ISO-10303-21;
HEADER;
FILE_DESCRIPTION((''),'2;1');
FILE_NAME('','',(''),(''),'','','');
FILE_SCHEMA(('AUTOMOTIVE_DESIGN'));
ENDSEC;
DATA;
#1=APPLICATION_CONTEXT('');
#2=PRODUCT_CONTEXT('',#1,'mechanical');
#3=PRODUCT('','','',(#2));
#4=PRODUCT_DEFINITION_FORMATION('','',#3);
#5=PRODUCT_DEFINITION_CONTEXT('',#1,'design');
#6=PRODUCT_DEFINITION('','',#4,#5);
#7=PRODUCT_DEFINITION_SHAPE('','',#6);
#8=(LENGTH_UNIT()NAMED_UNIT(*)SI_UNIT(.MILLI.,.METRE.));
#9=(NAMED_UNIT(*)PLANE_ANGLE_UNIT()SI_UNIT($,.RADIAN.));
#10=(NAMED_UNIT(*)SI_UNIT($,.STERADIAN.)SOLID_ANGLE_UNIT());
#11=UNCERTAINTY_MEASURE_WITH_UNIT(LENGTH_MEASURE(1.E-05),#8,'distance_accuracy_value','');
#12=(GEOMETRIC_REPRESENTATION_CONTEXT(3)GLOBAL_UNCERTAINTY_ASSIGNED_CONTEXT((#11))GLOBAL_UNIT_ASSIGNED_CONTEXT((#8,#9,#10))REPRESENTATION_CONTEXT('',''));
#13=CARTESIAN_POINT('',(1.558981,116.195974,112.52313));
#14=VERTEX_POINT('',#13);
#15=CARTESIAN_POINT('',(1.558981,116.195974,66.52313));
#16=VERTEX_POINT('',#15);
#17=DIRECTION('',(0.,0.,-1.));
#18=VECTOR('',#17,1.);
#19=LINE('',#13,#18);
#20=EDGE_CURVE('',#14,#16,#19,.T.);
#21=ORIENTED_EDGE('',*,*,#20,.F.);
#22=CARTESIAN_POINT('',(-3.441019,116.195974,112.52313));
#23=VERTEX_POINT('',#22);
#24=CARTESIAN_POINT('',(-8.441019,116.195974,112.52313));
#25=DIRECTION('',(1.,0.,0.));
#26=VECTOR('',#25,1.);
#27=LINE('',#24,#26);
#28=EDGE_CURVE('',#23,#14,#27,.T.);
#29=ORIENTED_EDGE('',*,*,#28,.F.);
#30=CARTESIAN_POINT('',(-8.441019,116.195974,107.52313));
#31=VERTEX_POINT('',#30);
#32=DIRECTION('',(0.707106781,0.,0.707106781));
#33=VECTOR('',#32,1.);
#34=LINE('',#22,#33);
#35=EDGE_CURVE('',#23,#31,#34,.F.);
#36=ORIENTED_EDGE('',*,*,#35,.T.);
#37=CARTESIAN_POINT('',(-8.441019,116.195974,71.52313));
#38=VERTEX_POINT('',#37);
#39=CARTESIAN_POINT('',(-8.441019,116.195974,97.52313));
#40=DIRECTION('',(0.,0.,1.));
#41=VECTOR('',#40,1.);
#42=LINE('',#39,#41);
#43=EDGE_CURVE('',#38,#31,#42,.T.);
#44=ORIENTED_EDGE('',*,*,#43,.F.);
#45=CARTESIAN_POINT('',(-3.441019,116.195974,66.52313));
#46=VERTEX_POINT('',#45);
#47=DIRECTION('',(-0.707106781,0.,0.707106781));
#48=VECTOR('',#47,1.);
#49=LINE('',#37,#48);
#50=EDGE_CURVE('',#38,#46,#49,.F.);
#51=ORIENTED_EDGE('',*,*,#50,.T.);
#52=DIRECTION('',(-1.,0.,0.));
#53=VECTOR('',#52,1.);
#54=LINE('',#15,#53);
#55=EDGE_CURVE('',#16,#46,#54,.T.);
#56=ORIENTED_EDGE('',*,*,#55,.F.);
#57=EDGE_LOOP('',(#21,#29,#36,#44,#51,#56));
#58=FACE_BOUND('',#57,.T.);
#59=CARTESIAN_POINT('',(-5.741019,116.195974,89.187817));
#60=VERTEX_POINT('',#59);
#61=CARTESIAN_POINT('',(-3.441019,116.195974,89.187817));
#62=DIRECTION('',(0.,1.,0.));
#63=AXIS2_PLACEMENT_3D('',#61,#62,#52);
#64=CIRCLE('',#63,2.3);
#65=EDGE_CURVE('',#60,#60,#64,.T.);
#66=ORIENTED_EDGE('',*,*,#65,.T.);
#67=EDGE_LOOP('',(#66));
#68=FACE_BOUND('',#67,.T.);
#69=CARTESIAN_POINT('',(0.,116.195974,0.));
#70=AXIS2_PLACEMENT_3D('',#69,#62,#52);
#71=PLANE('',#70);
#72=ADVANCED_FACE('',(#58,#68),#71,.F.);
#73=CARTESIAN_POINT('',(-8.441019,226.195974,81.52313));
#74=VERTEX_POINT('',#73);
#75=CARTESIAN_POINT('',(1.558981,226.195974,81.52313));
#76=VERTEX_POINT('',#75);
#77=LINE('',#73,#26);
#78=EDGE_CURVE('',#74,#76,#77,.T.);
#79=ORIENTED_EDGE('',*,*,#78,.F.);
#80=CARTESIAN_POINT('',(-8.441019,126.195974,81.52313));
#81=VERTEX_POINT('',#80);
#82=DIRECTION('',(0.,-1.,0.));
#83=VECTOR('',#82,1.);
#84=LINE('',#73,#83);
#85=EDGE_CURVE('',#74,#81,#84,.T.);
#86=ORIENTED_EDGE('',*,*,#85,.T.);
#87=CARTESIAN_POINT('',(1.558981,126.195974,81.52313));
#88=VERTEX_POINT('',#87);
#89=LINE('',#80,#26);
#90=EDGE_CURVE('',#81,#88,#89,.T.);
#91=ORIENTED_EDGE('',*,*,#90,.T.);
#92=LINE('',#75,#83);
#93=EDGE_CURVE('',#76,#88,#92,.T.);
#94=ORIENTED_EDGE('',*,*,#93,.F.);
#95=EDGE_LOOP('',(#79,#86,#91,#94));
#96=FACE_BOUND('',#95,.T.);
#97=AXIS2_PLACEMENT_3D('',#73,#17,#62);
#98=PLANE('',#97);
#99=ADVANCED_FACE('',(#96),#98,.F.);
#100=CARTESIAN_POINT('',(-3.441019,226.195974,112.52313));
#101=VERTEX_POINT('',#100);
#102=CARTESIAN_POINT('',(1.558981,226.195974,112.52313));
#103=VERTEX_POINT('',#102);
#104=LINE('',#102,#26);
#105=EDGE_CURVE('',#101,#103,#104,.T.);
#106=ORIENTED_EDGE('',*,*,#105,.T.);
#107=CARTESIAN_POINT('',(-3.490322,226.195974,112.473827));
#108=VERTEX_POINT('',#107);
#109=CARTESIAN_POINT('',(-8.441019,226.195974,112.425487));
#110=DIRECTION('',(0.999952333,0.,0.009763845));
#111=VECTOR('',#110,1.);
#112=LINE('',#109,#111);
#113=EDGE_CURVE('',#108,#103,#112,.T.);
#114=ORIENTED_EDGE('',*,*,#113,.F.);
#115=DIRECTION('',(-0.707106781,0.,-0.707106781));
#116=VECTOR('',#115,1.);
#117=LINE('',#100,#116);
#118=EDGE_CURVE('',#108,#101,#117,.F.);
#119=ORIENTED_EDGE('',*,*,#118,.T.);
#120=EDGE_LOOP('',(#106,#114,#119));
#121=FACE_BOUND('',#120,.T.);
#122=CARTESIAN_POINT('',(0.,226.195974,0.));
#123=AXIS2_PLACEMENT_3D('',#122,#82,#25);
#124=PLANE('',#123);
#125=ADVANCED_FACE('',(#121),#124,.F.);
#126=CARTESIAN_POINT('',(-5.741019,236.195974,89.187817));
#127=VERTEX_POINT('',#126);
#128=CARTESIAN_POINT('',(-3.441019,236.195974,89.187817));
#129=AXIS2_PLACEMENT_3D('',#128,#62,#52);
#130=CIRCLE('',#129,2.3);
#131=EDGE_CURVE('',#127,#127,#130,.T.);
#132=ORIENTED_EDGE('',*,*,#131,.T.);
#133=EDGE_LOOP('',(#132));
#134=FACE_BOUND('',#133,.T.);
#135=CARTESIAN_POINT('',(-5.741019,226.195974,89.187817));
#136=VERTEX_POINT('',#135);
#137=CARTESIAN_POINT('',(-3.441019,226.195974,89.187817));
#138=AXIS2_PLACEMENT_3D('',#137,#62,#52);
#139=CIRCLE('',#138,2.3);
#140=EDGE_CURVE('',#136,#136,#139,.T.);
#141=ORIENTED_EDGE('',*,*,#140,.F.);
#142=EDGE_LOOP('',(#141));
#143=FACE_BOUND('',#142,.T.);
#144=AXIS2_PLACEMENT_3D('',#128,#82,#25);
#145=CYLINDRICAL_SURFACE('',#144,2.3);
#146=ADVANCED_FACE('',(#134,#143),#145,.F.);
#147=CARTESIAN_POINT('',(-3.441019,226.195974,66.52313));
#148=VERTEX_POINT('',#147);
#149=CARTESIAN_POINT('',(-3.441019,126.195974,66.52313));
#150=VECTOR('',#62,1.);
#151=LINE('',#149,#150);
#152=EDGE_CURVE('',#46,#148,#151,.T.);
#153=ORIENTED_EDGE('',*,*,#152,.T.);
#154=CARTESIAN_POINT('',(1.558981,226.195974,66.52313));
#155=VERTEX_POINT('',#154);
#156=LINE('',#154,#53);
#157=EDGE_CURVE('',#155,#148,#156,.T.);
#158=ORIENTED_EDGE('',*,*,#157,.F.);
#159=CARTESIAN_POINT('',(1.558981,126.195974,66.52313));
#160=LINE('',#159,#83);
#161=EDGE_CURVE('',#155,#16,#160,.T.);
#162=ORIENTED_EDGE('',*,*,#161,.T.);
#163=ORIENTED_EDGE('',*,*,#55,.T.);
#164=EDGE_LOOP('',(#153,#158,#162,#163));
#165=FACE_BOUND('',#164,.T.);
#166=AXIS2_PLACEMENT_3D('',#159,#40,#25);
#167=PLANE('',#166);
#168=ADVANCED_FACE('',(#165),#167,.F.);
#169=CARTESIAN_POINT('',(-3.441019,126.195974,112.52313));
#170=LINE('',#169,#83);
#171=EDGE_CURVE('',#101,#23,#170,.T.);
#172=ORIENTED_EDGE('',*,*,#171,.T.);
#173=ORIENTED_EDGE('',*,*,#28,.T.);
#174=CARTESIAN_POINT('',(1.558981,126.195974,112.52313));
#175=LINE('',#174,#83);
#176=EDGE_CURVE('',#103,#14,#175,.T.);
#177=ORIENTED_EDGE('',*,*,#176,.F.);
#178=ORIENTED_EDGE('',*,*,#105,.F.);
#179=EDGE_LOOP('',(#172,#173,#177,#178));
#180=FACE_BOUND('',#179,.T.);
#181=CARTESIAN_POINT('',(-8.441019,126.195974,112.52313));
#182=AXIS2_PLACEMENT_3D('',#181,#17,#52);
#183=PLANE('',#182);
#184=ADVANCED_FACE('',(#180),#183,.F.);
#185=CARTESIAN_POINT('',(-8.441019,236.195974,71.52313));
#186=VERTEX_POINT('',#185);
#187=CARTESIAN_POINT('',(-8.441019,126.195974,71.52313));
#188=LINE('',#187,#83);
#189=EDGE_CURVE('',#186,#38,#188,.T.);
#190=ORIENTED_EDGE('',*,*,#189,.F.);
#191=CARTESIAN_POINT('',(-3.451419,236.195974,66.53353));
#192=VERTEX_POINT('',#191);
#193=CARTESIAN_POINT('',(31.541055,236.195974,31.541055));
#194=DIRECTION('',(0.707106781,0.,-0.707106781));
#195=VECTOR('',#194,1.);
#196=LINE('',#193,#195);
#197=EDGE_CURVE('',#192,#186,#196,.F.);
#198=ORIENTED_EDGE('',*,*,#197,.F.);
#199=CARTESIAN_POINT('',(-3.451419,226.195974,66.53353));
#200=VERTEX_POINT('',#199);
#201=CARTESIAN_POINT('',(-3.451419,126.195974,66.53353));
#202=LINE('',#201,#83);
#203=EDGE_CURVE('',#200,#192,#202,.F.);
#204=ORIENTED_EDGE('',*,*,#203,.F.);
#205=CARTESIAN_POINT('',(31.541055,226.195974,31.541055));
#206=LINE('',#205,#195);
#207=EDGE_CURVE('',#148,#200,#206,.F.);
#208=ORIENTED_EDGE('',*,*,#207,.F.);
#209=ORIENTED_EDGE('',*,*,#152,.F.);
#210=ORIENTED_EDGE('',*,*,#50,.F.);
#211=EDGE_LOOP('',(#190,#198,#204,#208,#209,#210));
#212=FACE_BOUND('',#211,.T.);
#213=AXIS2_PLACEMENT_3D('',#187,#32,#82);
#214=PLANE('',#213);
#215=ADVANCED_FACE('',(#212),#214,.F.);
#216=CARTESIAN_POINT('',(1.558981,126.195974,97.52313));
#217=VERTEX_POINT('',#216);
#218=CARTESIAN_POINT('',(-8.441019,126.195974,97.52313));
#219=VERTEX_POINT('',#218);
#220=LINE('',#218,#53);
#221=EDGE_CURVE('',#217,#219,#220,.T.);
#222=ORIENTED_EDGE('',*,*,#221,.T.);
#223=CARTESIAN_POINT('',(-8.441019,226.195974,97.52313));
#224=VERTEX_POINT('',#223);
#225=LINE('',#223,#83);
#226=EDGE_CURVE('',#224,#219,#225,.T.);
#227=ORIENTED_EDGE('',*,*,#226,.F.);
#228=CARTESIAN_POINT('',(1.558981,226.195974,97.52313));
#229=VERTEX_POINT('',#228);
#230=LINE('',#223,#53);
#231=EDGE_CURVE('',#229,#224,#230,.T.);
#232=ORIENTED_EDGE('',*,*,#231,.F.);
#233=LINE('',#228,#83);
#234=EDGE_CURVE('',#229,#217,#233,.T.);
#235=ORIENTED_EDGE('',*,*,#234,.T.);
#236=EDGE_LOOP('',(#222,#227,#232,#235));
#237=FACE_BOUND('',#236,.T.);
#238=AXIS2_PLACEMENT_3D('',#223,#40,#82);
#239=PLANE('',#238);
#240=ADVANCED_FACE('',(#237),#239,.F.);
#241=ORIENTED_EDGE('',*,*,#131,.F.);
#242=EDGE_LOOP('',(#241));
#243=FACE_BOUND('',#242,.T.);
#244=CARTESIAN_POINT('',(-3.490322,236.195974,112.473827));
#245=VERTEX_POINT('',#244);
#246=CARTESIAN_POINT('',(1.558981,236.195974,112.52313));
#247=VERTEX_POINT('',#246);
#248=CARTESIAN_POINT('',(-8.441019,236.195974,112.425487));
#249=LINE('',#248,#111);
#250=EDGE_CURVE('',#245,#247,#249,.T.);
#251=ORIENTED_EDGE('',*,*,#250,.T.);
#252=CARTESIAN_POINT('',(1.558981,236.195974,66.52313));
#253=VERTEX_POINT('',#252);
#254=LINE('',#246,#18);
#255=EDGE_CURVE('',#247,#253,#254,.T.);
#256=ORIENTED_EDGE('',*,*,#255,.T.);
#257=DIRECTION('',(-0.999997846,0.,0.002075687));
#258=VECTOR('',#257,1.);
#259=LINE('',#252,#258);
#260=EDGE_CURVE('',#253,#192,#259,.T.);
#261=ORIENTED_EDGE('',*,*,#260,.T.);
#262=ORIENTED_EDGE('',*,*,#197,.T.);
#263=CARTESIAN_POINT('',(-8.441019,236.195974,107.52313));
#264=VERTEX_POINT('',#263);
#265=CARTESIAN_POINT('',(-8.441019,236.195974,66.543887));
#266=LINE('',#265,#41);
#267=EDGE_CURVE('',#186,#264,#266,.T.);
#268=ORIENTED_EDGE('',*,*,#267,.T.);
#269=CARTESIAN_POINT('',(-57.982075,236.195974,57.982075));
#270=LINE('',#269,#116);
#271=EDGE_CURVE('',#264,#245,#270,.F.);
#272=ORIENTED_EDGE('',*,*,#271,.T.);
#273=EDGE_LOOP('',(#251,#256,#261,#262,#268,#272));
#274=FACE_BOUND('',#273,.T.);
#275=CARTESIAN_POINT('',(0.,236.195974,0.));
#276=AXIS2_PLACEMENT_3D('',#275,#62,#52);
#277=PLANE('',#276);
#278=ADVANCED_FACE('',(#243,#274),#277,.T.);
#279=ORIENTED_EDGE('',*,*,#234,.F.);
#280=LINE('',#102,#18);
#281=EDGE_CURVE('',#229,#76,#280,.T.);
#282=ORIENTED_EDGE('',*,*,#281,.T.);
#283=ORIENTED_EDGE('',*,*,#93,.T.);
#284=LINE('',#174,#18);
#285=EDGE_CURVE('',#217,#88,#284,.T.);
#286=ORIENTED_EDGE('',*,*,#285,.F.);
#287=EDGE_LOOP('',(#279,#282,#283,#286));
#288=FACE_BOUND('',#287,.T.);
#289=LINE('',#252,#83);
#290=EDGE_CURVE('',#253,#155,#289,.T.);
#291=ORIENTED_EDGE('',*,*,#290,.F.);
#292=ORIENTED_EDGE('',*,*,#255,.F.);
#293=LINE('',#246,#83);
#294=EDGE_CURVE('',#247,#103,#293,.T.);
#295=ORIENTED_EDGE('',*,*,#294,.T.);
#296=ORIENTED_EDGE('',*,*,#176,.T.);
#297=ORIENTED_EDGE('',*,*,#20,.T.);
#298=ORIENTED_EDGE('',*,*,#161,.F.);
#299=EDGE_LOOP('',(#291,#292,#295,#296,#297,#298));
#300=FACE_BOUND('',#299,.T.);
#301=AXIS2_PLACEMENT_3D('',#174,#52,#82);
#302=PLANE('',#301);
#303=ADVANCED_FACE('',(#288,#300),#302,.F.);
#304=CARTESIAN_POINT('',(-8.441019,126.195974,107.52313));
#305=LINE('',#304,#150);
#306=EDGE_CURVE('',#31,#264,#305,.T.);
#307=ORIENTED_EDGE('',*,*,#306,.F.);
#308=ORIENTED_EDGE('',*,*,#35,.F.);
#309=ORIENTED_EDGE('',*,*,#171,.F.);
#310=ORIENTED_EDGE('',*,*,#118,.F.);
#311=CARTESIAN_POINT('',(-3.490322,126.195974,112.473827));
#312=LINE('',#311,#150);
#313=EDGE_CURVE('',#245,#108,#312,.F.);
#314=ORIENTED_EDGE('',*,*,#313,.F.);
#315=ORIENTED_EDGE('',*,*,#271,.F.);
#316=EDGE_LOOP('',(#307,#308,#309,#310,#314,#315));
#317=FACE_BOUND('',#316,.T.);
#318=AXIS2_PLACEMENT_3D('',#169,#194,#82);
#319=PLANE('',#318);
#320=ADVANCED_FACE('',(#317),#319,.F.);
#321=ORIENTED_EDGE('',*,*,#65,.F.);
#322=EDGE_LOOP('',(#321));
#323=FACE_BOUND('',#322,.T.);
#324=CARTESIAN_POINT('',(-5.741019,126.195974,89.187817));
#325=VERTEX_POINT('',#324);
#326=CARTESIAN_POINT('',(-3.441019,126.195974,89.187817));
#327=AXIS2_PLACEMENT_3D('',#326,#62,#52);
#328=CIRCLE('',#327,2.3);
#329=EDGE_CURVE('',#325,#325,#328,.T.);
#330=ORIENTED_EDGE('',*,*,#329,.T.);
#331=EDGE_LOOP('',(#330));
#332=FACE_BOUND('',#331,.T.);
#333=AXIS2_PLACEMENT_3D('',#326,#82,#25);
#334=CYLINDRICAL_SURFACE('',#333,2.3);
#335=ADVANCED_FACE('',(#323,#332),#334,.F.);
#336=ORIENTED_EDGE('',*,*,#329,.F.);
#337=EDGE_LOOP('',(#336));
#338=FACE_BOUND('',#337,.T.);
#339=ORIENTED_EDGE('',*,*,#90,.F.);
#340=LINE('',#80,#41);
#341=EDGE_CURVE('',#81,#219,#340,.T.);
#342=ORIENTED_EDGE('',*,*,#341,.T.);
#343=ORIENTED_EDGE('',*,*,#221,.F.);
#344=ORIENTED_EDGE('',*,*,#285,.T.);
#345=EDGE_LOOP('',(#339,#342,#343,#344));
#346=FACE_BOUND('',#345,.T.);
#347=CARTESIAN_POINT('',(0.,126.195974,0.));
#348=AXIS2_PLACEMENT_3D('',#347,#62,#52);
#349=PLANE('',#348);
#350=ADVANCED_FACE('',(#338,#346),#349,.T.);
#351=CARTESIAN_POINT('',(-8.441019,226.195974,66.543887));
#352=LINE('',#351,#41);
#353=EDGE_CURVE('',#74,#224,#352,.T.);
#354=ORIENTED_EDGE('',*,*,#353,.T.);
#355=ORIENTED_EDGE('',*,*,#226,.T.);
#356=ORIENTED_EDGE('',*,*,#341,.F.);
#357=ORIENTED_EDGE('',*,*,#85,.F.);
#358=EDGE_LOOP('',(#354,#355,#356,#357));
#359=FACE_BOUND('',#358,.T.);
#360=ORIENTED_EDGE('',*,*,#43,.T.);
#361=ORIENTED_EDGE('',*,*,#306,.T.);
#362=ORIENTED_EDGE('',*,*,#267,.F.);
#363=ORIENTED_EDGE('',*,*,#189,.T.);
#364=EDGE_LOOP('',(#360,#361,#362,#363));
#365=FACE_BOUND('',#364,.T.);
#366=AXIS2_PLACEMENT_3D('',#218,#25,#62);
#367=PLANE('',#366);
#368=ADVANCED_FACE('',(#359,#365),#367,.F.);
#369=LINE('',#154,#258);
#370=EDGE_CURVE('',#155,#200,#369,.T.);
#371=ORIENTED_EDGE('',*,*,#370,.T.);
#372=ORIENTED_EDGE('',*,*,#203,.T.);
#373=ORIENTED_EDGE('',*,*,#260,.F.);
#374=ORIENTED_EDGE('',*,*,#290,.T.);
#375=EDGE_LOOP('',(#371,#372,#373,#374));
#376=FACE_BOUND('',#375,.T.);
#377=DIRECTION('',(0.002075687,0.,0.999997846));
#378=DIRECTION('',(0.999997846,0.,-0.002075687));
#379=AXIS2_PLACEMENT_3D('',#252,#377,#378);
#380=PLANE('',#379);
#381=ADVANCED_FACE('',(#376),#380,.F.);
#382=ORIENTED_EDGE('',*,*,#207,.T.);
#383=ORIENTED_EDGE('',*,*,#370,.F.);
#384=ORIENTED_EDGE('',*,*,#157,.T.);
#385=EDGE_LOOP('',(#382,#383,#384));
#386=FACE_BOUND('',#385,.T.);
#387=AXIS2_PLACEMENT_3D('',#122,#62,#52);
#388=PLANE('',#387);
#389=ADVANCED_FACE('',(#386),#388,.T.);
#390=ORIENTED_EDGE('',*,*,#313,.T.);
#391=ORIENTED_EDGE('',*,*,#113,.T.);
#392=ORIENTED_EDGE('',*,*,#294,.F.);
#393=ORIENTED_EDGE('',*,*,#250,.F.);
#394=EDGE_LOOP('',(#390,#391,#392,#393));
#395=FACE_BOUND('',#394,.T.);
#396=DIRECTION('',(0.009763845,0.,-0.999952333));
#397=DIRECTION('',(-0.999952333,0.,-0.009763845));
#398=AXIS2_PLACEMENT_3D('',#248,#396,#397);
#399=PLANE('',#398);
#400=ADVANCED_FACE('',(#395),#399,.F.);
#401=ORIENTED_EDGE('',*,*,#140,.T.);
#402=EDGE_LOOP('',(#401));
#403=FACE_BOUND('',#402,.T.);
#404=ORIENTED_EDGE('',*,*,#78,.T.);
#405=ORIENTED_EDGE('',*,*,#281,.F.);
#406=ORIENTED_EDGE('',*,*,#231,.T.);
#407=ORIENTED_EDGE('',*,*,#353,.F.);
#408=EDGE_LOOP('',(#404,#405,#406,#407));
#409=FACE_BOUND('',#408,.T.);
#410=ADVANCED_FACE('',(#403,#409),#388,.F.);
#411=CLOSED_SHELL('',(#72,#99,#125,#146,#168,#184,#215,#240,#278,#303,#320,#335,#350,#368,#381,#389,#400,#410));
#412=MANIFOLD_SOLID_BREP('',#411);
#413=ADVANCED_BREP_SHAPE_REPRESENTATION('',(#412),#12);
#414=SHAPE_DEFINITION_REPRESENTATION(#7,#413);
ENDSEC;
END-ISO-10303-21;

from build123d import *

# Parameters (mm, degrees)
SKETCH_1_R      = 2.3
EXTRUDE_1_DEPTH = 10
SKETCH_2_W      = 10
SKETCH_2_H      = 15
EXTRUDE_2_DEPTH = 100
SKETCH_3_R      = 2.3
EXTRUDE_3_DEPTH = 10
CHAMFER_1_SIZE  = 5


with BuildPart() as part:
    # Эскиз1 → Бобышка-Вытянуть1 (new body)
    with BuildSketch(Plane(origin=(0, 116.195974268, 0), x_dir=(1, 0, 0), z_dir=(0, 1, 0))):
        Polygon((-8.441019306, -97.523129836), (-8.441019306, -81.523129836), (-8.441019306, -66.523129836), (1.558980694, -66.523129836), (1.558980694, -112.523129836), (-8.441019306, -112.523129836), align=None)
        with Locations(Location((-3.441019306, -89.187817333, 0), (0, 0, 180))):
            Circle(SKETCH_1_R, mode=Mode.SUBTRACT)
    extrude(amount=EXTRUDE_1_DEPTH)

    # Эскиз2 → Бобышка-Вытянуть2 (add)
    with BuildSketch(Plane(origin=(0, 126.195974268, 0), x_dir=(1, 0, 0), z_dir=(0, 1, 0))):
        with Locations((-3.441019306, -74.023129836)):
            Rectangle(SKETCH_2_W, SKETCH_2_H)
        with Locations((-3.441019306, -105.023129836)):
            Rectangle(SKETCH_2_W, SKETCH_2_H)
    extrude(amount=EXTRUDE_2_DEPTH)

    # Эскиз3 → Бобышка-Вытянуть3 (add)
    with BuildSketch(Plane(origin=(0, 226.195974268, 0), x_dir=(1, 0, 0), z_dir=(0, 1, 0))):
        Polygon((-8.441019306, -66.543886748), (-8.441019306, -112.425486731), (1.558980694, -112.523129836), (1.558980694, -66.523129836), align=None)
        with Locations(Location((-3.441019306, -89.187817333, 0), (0, 0, 180))):
            Circle(SKETCH_3_R, mode=Mode.SUBTRACT)
    extrude(amount=EXTRUDE_3_DEPTH)

    # Фаска1
    # the kernel refuses this chamfer: 5 mm, written as the material it takes off along each edge
    with BuildSketch(Plane(origin=(-8.441019306, 239.054389208, 66.523129836), x_dir=(-0.027495876610586625, 0, 0.9996219169112968), z_dir=(0, -1, 0)), Plane(origin=(-8.441019306, 103.337559328, 112.523129836), x_dir=(-0.027495876610585935, 0, -0.9996219169112968), z_dir=(0, 1, 0))) as chamfer_1_piece_1:
        Polygon((CHAMFER_1_SIZE * 0.999621916911, -CHAMFER_1_SIZE * 0.0274958766106), (-CHAMFER_1_SIZE * 0.0274958766106, -CHAMFER_1_SIZE * 0.999621916911), (0, 0), align=None)
    extrude(amount=135.71682988, mode=Mode.SUBTRACT)


solid = part.part
